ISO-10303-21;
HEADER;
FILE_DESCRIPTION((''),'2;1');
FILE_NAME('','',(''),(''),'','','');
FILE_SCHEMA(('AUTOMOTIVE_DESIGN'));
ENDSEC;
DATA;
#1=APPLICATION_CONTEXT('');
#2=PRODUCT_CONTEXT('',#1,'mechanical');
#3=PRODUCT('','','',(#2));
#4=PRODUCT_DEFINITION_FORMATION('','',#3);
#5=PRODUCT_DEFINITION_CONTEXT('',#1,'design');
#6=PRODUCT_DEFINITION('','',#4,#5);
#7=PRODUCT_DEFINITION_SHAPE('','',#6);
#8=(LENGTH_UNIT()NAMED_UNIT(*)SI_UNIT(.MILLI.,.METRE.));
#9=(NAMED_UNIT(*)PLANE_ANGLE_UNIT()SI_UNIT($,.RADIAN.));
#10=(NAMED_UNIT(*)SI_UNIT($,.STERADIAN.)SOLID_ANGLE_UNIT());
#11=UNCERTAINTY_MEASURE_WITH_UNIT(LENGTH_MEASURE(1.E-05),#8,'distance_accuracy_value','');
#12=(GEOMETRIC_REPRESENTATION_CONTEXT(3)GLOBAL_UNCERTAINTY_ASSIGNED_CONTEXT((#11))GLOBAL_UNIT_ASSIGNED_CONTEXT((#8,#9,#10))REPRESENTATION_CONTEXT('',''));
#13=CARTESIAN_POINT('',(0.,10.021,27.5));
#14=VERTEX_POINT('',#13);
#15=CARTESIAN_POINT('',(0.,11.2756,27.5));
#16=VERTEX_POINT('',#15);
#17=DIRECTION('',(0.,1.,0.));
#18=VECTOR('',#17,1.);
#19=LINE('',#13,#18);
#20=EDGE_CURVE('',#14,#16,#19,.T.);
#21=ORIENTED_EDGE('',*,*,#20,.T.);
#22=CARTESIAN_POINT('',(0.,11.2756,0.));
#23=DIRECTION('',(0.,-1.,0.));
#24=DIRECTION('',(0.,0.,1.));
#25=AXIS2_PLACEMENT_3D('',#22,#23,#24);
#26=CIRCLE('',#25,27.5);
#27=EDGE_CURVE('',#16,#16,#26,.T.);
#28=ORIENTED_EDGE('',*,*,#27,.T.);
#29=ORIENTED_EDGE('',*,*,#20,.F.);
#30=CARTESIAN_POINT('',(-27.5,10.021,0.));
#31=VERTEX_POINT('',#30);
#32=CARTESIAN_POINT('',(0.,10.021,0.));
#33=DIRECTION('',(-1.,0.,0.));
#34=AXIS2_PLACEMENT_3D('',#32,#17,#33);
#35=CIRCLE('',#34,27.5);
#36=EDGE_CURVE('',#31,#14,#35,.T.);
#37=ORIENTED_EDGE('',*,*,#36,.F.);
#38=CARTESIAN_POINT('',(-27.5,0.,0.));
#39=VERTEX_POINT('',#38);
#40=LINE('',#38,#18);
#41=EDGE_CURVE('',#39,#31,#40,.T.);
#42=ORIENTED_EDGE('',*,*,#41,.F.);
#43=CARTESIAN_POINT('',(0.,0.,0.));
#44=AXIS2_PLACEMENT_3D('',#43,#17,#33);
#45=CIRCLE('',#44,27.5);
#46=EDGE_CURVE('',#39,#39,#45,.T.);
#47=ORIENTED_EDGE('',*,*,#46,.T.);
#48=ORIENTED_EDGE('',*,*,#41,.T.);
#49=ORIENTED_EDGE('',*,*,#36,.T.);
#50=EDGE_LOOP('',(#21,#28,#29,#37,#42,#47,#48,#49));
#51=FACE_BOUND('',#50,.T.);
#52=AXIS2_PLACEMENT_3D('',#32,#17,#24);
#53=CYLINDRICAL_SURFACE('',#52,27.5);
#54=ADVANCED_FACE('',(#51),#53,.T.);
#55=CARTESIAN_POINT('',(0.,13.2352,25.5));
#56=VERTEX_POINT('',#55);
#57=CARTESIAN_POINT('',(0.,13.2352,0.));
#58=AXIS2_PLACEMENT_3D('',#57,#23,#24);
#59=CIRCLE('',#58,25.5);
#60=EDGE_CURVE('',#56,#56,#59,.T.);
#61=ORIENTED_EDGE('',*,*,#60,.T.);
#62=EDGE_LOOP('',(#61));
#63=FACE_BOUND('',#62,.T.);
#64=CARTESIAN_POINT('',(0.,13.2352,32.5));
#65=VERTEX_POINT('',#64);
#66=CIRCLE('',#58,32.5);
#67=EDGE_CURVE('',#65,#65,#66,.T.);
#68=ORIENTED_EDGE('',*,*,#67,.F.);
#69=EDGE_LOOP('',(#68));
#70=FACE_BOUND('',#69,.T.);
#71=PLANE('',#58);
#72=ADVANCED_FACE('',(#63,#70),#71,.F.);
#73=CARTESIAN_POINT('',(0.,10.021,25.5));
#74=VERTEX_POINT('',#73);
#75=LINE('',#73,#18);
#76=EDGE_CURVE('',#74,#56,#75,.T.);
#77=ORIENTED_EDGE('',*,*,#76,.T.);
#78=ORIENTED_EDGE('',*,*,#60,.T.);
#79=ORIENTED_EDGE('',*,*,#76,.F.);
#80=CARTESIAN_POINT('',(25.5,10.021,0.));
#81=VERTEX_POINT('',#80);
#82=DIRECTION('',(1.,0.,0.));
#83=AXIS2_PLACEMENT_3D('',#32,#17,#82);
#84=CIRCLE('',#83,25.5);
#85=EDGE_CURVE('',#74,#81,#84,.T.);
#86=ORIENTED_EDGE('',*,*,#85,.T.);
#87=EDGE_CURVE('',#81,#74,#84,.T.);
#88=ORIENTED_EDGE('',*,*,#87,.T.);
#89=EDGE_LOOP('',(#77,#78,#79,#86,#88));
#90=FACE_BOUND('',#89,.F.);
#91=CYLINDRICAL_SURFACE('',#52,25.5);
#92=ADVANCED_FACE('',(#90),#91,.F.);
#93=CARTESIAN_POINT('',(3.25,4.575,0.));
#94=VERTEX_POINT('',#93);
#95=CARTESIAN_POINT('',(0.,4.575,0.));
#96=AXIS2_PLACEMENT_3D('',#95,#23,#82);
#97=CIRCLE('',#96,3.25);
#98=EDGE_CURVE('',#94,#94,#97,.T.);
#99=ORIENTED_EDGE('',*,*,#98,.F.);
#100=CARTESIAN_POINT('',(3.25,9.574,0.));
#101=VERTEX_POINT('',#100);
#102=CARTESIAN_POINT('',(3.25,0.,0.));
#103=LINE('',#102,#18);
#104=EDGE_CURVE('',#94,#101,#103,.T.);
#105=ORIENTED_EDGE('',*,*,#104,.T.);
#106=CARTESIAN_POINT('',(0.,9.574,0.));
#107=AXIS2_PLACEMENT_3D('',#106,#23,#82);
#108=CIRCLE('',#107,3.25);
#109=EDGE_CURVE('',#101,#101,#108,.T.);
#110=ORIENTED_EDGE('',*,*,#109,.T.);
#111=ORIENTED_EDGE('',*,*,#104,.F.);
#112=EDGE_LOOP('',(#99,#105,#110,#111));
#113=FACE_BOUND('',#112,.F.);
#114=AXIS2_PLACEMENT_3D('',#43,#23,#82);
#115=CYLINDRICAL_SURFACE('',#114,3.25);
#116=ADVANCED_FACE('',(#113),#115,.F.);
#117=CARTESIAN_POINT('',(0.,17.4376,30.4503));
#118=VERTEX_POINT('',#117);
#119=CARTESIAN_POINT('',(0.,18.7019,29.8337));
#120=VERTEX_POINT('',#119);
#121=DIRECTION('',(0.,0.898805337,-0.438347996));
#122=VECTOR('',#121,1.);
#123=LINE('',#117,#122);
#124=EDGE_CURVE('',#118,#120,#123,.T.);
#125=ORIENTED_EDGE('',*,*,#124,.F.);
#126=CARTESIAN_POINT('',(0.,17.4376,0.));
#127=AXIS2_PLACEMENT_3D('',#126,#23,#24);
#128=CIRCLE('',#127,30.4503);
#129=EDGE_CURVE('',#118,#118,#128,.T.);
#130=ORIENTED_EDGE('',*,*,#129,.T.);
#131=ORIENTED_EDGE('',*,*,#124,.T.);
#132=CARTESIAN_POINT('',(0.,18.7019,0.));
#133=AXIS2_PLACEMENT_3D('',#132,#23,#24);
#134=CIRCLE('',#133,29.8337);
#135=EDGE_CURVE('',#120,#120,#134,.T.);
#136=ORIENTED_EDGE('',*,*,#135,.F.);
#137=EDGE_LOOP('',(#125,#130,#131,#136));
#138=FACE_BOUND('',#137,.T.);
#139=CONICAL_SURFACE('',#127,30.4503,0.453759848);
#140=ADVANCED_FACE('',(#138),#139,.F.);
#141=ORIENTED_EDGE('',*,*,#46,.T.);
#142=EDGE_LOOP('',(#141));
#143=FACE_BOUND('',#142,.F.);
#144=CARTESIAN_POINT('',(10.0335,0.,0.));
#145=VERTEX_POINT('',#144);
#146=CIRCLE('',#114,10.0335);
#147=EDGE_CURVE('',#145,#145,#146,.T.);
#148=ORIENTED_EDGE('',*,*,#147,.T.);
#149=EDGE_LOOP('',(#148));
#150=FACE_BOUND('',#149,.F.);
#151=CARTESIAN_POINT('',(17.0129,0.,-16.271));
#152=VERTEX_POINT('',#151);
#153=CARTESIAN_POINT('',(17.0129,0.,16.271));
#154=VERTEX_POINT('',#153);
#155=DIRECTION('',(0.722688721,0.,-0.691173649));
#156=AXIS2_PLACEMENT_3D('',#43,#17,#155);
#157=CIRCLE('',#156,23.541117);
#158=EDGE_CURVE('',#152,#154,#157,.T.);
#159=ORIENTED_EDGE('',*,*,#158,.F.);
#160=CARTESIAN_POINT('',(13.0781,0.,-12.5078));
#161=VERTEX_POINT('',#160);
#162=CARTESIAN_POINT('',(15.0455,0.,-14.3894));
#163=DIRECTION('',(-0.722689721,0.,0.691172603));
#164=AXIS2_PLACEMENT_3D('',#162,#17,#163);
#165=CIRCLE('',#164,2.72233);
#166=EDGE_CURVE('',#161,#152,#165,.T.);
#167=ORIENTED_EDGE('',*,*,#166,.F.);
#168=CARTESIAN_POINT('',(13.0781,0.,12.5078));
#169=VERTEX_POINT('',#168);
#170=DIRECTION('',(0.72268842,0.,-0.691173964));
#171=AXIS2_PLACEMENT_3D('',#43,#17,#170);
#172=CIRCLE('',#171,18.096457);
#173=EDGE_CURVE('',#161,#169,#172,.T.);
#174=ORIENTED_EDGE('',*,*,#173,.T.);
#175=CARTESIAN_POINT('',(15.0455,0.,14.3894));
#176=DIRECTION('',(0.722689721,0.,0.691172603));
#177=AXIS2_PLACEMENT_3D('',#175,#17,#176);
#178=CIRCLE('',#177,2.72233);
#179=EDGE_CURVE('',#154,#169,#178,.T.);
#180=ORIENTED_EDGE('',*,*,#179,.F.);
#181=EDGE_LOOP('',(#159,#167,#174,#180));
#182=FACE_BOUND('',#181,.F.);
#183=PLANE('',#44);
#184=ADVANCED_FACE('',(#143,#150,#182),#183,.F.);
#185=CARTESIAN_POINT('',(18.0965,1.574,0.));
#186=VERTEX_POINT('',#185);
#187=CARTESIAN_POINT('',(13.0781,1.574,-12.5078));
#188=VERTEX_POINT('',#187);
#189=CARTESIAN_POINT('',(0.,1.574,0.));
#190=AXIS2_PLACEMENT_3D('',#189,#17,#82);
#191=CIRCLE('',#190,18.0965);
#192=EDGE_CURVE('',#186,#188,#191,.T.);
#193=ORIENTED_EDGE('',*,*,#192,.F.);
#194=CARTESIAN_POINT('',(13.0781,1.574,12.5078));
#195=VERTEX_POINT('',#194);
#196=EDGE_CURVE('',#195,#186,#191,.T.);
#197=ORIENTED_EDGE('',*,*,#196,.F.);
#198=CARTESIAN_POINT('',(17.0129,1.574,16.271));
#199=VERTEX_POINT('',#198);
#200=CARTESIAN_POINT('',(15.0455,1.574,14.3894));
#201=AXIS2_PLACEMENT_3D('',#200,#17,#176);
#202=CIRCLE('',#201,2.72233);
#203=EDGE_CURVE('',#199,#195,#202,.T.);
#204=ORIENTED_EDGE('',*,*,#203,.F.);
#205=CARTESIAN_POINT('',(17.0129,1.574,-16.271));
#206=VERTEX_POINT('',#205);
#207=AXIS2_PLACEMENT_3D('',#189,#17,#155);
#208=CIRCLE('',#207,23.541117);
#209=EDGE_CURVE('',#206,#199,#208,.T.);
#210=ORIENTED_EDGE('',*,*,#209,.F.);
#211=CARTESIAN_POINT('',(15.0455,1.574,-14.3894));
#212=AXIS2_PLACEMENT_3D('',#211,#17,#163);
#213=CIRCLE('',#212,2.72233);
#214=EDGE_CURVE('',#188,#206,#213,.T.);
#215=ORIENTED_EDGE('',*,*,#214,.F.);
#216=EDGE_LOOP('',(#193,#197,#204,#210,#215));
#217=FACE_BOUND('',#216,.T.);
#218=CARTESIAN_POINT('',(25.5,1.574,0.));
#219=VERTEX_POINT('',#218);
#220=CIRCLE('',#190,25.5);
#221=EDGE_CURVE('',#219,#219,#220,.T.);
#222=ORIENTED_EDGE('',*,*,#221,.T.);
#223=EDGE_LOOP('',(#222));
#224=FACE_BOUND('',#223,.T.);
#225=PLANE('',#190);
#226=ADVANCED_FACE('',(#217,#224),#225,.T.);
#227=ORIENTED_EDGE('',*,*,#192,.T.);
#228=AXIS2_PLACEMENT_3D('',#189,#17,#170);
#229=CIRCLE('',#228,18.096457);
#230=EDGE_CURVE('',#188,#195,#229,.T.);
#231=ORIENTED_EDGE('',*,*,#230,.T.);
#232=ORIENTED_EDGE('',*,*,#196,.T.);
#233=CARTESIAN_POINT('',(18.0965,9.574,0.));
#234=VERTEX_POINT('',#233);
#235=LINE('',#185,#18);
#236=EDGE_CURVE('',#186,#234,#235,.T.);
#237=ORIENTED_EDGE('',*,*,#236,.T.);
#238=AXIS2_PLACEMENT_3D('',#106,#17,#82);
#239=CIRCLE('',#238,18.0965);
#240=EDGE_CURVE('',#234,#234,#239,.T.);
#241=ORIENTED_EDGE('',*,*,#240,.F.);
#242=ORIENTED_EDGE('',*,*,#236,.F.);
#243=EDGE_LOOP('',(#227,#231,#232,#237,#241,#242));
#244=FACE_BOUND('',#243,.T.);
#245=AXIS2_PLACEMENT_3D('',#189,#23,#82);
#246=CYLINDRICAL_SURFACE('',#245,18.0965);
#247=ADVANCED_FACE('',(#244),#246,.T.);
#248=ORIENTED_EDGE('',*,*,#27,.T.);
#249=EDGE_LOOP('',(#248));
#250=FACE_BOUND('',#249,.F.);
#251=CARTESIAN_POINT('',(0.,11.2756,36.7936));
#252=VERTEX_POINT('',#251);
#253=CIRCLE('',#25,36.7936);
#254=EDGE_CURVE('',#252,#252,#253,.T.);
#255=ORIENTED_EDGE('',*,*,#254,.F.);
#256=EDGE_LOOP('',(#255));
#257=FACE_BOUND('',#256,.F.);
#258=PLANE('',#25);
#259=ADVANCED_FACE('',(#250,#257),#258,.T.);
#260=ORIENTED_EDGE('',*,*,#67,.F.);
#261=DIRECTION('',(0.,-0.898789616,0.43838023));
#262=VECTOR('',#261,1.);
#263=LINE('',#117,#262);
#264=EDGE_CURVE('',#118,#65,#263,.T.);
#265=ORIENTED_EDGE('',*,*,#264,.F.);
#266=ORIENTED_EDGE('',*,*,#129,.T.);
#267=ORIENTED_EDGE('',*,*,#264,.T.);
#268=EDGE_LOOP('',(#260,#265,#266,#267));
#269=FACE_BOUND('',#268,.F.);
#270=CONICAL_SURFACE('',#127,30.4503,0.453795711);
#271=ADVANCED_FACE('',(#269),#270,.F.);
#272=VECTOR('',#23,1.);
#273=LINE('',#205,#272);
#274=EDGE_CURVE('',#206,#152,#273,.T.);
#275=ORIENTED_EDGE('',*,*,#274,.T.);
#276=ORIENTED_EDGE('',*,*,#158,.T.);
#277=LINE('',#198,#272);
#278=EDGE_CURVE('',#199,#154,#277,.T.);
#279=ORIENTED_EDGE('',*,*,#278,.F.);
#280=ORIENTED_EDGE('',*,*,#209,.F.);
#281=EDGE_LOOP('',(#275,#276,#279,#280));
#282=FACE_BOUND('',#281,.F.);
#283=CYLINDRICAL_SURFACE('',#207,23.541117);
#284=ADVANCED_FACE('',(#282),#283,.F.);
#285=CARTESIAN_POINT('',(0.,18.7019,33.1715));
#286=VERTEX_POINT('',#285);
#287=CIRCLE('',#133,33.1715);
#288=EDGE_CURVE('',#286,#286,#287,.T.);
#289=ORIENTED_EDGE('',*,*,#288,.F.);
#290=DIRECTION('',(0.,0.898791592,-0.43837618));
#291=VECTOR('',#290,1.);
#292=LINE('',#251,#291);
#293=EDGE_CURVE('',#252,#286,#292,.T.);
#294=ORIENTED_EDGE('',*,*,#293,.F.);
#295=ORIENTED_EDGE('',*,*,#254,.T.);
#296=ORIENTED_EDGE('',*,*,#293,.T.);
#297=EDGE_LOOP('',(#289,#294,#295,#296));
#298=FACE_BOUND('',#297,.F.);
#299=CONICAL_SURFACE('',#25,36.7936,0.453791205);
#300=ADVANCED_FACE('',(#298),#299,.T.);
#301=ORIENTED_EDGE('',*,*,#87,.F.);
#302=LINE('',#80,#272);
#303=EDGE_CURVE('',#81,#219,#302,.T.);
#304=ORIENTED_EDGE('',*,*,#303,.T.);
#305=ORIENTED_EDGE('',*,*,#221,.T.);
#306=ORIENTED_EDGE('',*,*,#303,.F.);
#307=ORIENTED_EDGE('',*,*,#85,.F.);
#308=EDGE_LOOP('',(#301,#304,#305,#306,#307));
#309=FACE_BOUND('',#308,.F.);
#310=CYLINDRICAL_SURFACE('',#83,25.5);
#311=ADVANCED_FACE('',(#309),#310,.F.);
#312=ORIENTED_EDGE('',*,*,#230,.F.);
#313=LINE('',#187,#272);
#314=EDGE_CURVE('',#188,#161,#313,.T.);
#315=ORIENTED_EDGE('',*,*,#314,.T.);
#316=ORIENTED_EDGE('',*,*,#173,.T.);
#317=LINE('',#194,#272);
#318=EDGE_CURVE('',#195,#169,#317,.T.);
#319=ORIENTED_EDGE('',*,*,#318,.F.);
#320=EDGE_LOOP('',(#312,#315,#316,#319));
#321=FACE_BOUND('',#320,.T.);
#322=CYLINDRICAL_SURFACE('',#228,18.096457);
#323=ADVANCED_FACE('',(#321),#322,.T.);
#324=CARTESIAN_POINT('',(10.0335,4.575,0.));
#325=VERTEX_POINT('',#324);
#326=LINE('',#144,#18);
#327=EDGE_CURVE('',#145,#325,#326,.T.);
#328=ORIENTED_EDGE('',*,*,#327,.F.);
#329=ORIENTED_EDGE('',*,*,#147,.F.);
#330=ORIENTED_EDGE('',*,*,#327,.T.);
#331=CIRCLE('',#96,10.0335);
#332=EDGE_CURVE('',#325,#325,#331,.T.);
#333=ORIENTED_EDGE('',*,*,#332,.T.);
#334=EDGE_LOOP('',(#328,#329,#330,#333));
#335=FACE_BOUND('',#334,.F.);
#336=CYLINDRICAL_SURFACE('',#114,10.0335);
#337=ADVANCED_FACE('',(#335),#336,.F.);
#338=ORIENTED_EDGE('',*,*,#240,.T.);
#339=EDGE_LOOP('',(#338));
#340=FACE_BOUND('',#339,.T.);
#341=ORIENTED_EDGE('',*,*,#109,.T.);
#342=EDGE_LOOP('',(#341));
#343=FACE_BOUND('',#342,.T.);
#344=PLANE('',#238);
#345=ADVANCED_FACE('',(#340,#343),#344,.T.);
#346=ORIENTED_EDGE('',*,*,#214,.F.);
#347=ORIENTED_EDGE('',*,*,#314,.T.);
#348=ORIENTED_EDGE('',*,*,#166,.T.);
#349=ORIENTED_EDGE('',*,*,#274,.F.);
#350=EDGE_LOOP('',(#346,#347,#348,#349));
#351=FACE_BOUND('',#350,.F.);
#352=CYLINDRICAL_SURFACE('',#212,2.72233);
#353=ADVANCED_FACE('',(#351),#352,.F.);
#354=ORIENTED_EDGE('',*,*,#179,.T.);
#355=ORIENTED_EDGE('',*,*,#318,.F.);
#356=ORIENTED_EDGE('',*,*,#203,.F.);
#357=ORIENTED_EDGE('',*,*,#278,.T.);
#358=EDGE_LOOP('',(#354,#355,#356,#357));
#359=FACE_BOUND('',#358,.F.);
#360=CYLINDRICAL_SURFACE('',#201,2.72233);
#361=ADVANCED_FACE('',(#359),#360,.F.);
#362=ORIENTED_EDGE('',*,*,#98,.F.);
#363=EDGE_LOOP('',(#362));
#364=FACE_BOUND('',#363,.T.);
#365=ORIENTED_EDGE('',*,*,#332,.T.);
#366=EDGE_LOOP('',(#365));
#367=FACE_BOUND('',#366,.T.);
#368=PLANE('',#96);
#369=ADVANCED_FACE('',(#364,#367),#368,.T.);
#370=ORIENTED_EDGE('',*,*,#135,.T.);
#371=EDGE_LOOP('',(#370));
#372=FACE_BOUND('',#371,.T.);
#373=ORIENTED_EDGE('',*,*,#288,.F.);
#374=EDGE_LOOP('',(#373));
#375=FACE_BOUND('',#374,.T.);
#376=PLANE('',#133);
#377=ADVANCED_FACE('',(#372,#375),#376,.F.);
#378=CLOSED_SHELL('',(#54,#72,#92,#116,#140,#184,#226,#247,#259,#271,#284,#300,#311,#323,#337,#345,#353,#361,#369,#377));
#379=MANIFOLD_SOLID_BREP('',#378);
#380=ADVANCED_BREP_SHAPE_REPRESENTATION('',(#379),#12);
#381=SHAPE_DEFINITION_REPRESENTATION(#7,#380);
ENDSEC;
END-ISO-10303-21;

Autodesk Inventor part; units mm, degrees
ref_plane "YZ Plane" through (0, 0, 0) normal (1, 0, 0) x (0, 1, 0)
ref_plane "XZ Plane" through (0, 0, 0) normal (0, 1, 0) x (-1, 0, 0)
ref_plane "XY Plane" through (0, 0, 0) normal (0, 0, 1) x (1, 0, 0)
sketch "Boceto1" plane through (0, 0, 0) normal (0, 1, 0) x (-1, 0, 0)
  circle A0 centre (0, 0) radius 27.5
  dimension "d0" = 55
extrude "Extrusión1" add sketch "Boceto1" along normal blind 10.021
sketch "Boceto2" plane through (0, 10.021, 0) normal (0, 1, 0) x (1, 0, 0)
  circle A0 centre (0, 0) radius 25.5
  dimension "d3" = 51
extrude "Extrusión2" cut sketch "Boceto2" against normal blind 8.447
sketch "Boceto3" plane through (0, 1.574, 0) normal (0, 1, 0) x (1, 0, 0)
  circle A0 centre (0, 0) radius 18.0965
  dimension "d6" = 36.193
extrude "Extrusión3" add sketch "Boceto3" along normal blind 8
sketch "Boceto6" plane through (0, 0, 0) normal (0, -1, 0) x (1, 0, 0)
  circle A0 centre (0, 0) radius 3.25
  dimension "d16" = 6.5
extrude "Extrusión6" cut sketch "Boceto6" against normal blind 10
sketch "Boceto7" plane through (0, 0, 0) normal (0, -1, 0) x (1, 0, 0)
  circle A0 centre (0, 0) radius 3.25 projected
  circle A1 centre (0, 0) radius 10.0335
  dimension "d19" = 20.067
extrude "Extrusión7" cut sketch "Boceto7" against normal blind 4.575
sketch "Boceto10" plane through (0, 0, 0) normal (1, 0, 0) x (0, 1, 0)
  line L0 (10.021, -27.5) -> (10.021, 27.5) projected
  line L1 (10.021, 27.5) -> (11.2756, 27.5)
  line L2 (11.2756, 27.5) -> (11.2756, 36.7936)
  line L3 (11.2756, 36.7936) -> (18.7019, 33.1715)
  line L4 (17.4376, 30.4503) -> (13.2352, 32.5)
  line L5 (10.021, 25.5) -> (1.574, 25.5) projected
  line L6 (10.021, 25.5) -> (13.2352, 25.5)
  line L7 (13.2352, 25.5) -> (13.2352, 32.5)
  line L8 (10.021, 27.5) -> (10.021, 25.5)
  line L9 (26.1838, 0) -> (-2.8727, 0)
  line L10 (17.4376, 30.4503) -> (18.7019, 29.8337)
  line L11 (18.7019, 29.8337) -> (18.7019, 33.1715)
  point P0 (0, 0)
  point P1 (20.2808, 32.4015)
  dimension "d29" = 64
  dimension "d30" = 3
  dimension "d32" = 7
revolve "Revolución1" add sketch "Boceto10" angle 360 about axis through (0, 26.1838, 0) along (0, -1, 0)
sketch "Boceto11" plane through (0, 1.574, 0) normal (0, 1, 0) x (1, 0, 0)
  arc A0 (13.0781, 12.5078) -> (13.0781, -12.5078) centre (0, 0) ccw
  arc A1 (17.0129, 16.271) -> (17.0129, -16.271) centre (0, 0) ccw
  arc A2 (17.0129, -16.271) -> (13.0781, -12.5078) centre (15.0455, -14.3894) ccw
  circle A3 centre (0, 0) radius 18.0965 projected
  arc A4 (13.0781, 12.5078) -> (17.0129, 16.271) centre (15.0455, 14.3894) ccw
extrude "Extrusión10" cut sketch "Boceto11" against normal blind 3 contours A0 A2 A1 A4
properties part number "Scroll_nuevo"
